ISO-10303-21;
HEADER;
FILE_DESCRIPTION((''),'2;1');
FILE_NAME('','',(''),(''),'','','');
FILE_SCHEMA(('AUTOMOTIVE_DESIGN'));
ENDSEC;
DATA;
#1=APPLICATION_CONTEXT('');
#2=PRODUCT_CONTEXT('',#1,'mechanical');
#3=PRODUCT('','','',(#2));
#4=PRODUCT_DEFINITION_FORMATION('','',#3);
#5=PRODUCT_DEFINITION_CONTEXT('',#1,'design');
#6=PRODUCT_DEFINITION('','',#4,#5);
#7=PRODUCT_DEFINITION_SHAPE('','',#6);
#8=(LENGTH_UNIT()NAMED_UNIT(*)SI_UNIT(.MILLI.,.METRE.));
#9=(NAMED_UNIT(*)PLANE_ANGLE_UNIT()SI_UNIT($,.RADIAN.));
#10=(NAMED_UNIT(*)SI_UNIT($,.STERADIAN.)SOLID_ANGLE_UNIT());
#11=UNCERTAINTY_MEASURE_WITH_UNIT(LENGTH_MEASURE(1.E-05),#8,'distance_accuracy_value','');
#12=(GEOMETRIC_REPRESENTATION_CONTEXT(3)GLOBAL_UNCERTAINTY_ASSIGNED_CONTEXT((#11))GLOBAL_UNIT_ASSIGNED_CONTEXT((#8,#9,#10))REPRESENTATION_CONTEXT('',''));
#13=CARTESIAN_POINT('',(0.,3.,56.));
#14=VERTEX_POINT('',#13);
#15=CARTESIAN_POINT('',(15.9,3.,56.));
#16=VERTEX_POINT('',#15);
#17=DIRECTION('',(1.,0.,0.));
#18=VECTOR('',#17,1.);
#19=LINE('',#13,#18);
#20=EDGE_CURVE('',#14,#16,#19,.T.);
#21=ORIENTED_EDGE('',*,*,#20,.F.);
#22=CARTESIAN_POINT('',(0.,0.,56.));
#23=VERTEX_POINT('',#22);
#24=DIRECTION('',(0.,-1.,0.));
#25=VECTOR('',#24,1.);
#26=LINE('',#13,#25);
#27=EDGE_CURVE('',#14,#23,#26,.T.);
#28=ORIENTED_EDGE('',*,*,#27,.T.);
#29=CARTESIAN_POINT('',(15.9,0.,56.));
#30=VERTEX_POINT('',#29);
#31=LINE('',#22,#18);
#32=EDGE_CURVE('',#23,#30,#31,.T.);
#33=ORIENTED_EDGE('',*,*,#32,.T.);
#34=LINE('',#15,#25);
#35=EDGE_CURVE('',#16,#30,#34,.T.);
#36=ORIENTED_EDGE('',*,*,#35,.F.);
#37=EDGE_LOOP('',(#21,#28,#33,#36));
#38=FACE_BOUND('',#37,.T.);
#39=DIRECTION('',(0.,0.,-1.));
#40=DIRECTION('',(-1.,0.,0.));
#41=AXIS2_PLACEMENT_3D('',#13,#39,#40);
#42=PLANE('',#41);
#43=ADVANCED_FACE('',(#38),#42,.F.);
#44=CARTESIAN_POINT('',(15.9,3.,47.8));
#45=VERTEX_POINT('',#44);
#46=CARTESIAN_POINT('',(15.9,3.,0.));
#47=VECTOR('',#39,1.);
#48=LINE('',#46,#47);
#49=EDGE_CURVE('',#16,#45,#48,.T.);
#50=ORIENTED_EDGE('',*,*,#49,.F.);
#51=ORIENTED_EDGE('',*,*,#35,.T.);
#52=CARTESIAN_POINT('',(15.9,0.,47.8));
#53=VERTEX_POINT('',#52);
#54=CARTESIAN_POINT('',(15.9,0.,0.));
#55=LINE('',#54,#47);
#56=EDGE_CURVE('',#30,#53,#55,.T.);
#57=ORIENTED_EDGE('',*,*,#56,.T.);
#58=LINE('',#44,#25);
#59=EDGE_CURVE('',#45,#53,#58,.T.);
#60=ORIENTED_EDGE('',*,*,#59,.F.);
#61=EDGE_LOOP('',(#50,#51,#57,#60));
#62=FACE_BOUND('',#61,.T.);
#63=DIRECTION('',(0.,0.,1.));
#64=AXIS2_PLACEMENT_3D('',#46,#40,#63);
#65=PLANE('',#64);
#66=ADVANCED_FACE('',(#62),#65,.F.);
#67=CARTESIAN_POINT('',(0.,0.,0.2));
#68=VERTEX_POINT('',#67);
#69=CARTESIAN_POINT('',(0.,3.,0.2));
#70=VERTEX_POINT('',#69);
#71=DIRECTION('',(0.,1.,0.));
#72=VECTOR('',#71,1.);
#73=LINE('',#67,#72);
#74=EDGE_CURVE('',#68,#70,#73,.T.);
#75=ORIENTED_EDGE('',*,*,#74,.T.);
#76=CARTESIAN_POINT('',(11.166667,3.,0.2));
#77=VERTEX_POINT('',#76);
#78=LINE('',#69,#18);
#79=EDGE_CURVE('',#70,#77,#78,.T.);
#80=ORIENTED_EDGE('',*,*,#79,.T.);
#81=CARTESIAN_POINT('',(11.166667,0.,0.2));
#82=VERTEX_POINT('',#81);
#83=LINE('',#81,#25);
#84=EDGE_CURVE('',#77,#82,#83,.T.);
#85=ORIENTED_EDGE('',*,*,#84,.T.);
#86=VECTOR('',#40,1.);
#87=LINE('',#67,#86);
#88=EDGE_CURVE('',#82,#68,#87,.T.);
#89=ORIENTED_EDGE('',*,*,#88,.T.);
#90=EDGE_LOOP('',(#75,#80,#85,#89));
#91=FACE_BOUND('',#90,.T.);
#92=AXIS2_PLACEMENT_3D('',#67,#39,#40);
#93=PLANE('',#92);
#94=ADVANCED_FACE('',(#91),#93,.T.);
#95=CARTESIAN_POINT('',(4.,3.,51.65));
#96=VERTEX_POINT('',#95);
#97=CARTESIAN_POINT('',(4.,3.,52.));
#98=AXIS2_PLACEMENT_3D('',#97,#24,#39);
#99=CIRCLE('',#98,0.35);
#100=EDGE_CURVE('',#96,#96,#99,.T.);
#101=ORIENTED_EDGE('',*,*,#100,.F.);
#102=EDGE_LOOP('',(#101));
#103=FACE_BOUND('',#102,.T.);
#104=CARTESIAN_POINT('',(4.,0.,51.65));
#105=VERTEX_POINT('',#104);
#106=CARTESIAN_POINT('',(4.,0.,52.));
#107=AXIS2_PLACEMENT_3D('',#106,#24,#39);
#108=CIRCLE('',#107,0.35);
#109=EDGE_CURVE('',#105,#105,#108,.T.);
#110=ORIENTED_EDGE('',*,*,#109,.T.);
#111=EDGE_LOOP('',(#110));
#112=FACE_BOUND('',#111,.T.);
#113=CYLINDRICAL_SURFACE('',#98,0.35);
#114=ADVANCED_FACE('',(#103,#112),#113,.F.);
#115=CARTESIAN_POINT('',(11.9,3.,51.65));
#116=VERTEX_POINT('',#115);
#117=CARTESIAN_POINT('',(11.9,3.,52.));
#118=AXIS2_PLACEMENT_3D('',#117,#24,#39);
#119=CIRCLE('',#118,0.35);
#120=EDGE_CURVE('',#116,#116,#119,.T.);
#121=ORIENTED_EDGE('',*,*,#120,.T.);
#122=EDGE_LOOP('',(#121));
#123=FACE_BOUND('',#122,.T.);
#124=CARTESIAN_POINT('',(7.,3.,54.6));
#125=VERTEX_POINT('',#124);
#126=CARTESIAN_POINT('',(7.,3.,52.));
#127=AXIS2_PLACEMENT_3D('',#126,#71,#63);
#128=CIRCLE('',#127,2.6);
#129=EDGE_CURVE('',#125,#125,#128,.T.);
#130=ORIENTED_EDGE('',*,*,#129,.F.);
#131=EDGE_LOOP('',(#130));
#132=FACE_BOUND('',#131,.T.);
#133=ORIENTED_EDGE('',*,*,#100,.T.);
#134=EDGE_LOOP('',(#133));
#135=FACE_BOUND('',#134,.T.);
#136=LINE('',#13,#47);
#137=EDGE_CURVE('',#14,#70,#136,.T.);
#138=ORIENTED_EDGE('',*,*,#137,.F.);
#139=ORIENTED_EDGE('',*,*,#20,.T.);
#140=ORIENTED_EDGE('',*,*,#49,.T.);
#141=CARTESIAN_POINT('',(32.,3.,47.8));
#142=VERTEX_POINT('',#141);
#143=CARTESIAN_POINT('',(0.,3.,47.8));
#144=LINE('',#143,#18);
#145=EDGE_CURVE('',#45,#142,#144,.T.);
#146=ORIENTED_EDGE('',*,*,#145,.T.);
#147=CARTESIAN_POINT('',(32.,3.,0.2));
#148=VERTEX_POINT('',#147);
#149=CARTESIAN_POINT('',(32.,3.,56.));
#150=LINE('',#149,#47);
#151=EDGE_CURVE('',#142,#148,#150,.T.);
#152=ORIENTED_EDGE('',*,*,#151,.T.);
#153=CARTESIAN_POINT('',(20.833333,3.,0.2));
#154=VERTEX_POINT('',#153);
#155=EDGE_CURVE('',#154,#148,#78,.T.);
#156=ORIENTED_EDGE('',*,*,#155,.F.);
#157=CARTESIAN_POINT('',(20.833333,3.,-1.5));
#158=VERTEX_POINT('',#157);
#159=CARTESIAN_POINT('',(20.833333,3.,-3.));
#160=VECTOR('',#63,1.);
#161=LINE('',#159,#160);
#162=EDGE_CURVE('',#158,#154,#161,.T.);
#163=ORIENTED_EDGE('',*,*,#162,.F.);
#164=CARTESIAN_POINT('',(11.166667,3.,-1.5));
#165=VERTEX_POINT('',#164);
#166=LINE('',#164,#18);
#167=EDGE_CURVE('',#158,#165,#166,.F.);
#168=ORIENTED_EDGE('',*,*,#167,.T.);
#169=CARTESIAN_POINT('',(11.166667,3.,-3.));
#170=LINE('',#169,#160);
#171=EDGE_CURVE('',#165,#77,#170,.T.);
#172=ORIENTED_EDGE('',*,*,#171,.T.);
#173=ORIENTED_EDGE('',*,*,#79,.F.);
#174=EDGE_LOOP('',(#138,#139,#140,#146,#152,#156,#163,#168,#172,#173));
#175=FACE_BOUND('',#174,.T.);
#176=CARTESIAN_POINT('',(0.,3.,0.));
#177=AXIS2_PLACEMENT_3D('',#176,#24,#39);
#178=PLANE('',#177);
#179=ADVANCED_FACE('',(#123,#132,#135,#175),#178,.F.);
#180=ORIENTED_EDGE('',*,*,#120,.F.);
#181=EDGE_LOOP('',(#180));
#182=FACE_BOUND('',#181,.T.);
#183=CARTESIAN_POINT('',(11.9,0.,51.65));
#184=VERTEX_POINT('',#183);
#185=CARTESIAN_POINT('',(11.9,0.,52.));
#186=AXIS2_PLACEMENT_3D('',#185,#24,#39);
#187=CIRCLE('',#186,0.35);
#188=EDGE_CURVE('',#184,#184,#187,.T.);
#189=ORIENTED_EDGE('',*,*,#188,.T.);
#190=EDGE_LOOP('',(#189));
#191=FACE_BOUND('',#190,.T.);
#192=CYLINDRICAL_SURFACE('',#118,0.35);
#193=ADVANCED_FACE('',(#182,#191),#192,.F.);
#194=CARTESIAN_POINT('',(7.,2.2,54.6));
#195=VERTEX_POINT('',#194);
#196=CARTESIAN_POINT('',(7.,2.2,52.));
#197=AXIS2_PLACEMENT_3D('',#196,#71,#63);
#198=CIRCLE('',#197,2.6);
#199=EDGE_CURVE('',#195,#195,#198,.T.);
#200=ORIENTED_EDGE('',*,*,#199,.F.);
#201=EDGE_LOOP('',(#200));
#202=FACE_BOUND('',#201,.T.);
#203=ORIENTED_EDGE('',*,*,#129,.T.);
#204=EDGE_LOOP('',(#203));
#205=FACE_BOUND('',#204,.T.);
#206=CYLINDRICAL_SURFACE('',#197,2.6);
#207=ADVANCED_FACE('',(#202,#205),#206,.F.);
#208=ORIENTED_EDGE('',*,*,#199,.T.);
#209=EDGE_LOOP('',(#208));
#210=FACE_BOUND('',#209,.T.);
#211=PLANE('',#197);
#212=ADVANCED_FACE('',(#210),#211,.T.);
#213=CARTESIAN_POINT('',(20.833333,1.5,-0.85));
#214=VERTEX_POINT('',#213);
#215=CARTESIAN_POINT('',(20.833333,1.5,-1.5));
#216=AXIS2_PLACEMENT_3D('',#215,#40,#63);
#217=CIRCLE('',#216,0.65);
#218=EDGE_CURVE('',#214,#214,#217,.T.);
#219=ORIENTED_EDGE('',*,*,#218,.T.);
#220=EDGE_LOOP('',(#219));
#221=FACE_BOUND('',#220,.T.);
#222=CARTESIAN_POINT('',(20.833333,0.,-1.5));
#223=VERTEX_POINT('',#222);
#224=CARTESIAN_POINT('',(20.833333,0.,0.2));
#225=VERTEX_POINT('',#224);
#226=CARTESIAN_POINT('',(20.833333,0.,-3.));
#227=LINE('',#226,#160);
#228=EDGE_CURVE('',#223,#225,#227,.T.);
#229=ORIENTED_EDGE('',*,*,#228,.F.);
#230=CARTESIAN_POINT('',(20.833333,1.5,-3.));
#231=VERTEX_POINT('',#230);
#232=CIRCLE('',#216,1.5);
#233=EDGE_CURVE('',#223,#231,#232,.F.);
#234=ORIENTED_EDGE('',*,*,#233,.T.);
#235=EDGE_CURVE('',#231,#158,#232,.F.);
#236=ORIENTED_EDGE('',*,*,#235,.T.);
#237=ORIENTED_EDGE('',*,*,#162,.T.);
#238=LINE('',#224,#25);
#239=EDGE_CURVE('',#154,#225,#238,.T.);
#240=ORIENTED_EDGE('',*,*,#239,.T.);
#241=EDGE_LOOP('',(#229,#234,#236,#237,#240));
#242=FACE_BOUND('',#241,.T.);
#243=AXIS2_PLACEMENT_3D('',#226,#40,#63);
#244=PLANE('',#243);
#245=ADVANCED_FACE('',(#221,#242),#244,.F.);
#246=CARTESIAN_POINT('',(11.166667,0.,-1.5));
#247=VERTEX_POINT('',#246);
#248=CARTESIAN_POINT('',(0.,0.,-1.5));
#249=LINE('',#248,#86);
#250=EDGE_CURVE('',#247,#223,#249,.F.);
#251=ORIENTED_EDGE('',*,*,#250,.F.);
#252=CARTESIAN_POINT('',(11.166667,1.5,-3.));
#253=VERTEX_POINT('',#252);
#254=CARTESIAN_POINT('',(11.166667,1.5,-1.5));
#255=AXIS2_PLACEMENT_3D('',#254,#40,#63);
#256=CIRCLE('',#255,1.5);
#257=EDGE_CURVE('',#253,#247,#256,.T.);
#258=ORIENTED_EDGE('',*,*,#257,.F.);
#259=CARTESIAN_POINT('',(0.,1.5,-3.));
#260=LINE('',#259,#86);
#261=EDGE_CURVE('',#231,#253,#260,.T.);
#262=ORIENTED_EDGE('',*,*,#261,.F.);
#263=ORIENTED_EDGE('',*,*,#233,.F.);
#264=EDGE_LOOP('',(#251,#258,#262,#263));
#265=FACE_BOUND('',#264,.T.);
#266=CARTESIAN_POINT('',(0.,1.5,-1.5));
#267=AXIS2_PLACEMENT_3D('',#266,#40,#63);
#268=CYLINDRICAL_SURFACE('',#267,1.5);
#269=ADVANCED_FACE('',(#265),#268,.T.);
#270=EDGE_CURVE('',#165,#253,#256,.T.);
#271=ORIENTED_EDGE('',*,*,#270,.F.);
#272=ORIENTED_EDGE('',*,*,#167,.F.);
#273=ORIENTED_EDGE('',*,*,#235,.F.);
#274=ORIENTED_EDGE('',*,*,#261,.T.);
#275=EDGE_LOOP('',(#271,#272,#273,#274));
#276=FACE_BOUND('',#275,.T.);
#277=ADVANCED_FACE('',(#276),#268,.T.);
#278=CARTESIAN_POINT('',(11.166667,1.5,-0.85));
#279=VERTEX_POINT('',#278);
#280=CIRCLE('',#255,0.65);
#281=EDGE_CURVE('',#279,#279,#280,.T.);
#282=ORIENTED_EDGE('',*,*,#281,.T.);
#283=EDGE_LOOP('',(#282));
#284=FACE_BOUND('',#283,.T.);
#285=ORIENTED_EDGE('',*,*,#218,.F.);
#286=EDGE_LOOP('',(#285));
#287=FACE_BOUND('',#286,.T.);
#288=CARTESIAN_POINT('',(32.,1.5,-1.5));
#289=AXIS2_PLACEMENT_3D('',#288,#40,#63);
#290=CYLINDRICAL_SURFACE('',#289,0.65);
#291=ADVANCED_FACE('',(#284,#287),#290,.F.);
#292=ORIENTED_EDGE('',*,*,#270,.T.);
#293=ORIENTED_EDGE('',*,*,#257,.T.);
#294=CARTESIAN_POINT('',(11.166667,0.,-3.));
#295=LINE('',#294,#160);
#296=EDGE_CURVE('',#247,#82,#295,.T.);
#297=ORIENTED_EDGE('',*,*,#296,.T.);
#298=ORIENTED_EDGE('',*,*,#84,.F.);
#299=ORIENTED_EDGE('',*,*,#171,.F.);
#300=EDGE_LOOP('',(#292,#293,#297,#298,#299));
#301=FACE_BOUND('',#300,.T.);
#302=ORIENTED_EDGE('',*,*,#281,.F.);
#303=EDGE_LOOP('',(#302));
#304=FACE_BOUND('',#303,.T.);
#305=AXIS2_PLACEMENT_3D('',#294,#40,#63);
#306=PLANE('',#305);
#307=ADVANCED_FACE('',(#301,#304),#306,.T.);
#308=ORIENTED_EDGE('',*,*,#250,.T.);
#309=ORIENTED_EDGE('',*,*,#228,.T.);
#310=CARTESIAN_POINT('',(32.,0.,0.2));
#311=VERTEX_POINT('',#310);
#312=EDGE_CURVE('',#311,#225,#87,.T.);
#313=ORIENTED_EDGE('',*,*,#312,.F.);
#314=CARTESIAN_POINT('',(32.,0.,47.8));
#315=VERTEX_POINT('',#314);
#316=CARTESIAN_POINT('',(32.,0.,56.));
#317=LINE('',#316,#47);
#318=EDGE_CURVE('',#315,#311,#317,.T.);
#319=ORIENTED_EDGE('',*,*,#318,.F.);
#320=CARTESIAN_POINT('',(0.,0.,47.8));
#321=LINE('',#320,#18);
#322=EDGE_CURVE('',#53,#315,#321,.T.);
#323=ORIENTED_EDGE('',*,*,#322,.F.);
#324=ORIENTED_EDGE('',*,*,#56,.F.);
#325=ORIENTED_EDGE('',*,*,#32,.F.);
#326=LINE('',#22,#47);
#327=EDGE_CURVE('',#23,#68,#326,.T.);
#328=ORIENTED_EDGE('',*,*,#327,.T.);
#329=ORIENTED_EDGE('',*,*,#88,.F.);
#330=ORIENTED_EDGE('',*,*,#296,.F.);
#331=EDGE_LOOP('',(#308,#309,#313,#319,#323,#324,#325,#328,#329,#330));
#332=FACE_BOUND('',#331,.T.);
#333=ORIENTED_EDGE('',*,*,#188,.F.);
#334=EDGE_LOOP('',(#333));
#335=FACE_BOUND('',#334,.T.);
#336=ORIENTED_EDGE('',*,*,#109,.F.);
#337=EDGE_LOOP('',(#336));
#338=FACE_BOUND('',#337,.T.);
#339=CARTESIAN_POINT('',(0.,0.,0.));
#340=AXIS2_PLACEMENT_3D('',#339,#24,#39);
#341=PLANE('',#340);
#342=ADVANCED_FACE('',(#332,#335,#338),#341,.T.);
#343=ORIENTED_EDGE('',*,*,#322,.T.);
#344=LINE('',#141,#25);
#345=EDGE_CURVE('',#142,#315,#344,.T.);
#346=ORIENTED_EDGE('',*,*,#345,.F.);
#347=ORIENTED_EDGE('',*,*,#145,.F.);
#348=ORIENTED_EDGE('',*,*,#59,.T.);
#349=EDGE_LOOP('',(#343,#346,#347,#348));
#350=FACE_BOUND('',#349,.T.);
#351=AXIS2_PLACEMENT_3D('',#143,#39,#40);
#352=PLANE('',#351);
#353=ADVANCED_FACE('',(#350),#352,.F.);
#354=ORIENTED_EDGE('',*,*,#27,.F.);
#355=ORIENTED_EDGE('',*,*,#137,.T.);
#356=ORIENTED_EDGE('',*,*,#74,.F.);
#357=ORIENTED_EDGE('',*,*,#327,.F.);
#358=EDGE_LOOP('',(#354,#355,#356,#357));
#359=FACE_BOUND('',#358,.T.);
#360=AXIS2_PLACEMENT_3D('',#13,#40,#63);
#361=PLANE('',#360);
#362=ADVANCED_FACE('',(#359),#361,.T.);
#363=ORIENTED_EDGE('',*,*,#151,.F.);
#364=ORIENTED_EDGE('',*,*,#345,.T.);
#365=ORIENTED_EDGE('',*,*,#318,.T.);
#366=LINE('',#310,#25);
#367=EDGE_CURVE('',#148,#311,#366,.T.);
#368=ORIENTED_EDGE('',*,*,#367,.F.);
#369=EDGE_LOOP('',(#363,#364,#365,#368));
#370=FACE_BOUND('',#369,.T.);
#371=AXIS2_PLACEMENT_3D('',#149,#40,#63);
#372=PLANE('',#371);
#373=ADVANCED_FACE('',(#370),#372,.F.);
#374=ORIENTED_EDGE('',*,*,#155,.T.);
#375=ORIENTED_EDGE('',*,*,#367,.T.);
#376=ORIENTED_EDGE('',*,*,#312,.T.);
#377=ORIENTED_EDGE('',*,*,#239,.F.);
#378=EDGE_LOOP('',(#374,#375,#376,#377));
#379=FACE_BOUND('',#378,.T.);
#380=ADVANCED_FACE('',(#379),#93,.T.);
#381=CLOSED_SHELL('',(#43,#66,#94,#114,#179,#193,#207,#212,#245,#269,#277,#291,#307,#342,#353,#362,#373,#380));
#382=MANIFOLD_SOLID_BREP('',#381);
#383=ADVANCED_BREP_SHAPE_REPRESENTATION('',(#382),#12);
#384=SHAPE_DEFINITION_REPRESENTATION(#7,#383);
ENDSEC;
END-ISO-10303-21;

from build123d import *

# Parameters (mm, degrees)
EXTRUDE_1_DEPTH     = 3
SKETCH_2_W          = 9.666666666
SKETCH_2_H          = 3
EXTRUDE_2_DEPTH     = 3
FILLET_1_R          = 1.5
SKETCH_3_R          = 0.65
CUT_EXTRUDE_1_DEPTH = 60.824976204
SKETCH_2_3_W        = 10.666666667
SKETCH_2_3_H        = 3
SKETCH_2_3_W_2      = 0.5
CUT_EXTRUDE_2_DEPTH = 0.2
SKETCH_4_R          = 2.6
CUT_EXTRUDE_3_DEPTH = 0.8
SKETCH_5_R          = 0.35
CUT_EXTRUDE_4_DEPTH = 65.567793829


with BuildPart() as part:
    # 草图1 → 凸台-拉伸1 (new body)
    with BuildSketch(Plane(origin=(0, 0, 0), x_dir=(1, 0, 0), z_dir=(0, 1, 0))):
        Polygon((15.9, -47.8), (32, -47.8), (32, 0), (0, 0), (0, -56), (15.9, -56), align=None)
    extrude(amount=EXTRUDE_1_DEPTH)

    # 草图2 → 凸台-拉伸2 (add)
    with BuildSketch(Plane(origin=(0, 0, 0), x_dir=(-1, 0, 0), z_dir=(0, 0, -1))):
        with Locations((-16, 1.5)):
            Rectangle(SKETCH_2_W, SKETCH_2_H)
    extrude(amount=EXTRUDE_2_DEPTH)

    # 圆角1
    fillet_1_edges = [part.edges().sort_by_distance(p)[0] for p in [
        (16, 3, -3),
        (16, 0, -3),
    ]]
    fillet(fillet_1_edges, radius=FILLET_1_R - 0.0001)  # a hair under: the kernel refuses the full size

    # 草图3 → 切除-拉伸1 (cut, through all)
    with BuildSketch(Plane.ZY.offset(-11.166666667)):
        with Locations((-1.5, 1.5)):
            Circle(SKETCH_3_R)
    extrude(amount=-CUT_EXTRUDE_1_DEPTH, mode=Mode.SUBTRACT)

    # 草图2<3> → 切除-拉伸2 (cut)
    with BuildSketch(Plane(origin=(0, 0, 0), x_dir=(-1, 0, 0), z_dir=(0, 0, -1))):
        with Locations((-5.333333334, 1.5)):
            Rectangle(SKETCH_2_3_W, SKETCH_2_3_H)
        with Locations((-10.916666667, 1.5)):
            Rectangle(SKETCH_2_3_W_2, SKETCH_2_3_H)
        with Locations((-21.083333333, 1.5)):
            Rectangle(SKETCH_2_3_W_2, SKETCH_2_3_H)
        with Locations((-26.666666666, 1.5)):
            Rectangle(SKETCH_2_3_W, SKETCH_2_3_H)
    extrude(amount=-CUT_EXTRUDE_2_DEPTH, mode=Mode.SUBTRACT)

    # 草图4 → 切除-拉伸3 (cut)
    with BuildSketch(Plane(origin=(0, 3, 0), x_dir=(1, 0, 0), z_dir=(0, 1, 0))):
        with Locations(Location((7, -52, 0), (0, 0, 270))):
            Circle(SKETCH_4_R)
    extrude(amount=-CUT_EXTRUDE_3_DEPTH, mode=Mode.SUBTRACT)

    # 草图5 → 切除-拉伸4 (cut, through all)
    with BuildSketch(Plane.XZ):
        with Locations(Location((11.9, 52, 0), (0, 0, 270))):
            Circle(SKETCH_5_R)
        with Locations(Location((4, 52, 0), (0, 0, 270))):
            Circle(SKETCH_5_R)
    extrude(amount=-CUT_EXTRUDE_4_DEPTH, mode=Mode.SUBTRACT)


solid = part.part
